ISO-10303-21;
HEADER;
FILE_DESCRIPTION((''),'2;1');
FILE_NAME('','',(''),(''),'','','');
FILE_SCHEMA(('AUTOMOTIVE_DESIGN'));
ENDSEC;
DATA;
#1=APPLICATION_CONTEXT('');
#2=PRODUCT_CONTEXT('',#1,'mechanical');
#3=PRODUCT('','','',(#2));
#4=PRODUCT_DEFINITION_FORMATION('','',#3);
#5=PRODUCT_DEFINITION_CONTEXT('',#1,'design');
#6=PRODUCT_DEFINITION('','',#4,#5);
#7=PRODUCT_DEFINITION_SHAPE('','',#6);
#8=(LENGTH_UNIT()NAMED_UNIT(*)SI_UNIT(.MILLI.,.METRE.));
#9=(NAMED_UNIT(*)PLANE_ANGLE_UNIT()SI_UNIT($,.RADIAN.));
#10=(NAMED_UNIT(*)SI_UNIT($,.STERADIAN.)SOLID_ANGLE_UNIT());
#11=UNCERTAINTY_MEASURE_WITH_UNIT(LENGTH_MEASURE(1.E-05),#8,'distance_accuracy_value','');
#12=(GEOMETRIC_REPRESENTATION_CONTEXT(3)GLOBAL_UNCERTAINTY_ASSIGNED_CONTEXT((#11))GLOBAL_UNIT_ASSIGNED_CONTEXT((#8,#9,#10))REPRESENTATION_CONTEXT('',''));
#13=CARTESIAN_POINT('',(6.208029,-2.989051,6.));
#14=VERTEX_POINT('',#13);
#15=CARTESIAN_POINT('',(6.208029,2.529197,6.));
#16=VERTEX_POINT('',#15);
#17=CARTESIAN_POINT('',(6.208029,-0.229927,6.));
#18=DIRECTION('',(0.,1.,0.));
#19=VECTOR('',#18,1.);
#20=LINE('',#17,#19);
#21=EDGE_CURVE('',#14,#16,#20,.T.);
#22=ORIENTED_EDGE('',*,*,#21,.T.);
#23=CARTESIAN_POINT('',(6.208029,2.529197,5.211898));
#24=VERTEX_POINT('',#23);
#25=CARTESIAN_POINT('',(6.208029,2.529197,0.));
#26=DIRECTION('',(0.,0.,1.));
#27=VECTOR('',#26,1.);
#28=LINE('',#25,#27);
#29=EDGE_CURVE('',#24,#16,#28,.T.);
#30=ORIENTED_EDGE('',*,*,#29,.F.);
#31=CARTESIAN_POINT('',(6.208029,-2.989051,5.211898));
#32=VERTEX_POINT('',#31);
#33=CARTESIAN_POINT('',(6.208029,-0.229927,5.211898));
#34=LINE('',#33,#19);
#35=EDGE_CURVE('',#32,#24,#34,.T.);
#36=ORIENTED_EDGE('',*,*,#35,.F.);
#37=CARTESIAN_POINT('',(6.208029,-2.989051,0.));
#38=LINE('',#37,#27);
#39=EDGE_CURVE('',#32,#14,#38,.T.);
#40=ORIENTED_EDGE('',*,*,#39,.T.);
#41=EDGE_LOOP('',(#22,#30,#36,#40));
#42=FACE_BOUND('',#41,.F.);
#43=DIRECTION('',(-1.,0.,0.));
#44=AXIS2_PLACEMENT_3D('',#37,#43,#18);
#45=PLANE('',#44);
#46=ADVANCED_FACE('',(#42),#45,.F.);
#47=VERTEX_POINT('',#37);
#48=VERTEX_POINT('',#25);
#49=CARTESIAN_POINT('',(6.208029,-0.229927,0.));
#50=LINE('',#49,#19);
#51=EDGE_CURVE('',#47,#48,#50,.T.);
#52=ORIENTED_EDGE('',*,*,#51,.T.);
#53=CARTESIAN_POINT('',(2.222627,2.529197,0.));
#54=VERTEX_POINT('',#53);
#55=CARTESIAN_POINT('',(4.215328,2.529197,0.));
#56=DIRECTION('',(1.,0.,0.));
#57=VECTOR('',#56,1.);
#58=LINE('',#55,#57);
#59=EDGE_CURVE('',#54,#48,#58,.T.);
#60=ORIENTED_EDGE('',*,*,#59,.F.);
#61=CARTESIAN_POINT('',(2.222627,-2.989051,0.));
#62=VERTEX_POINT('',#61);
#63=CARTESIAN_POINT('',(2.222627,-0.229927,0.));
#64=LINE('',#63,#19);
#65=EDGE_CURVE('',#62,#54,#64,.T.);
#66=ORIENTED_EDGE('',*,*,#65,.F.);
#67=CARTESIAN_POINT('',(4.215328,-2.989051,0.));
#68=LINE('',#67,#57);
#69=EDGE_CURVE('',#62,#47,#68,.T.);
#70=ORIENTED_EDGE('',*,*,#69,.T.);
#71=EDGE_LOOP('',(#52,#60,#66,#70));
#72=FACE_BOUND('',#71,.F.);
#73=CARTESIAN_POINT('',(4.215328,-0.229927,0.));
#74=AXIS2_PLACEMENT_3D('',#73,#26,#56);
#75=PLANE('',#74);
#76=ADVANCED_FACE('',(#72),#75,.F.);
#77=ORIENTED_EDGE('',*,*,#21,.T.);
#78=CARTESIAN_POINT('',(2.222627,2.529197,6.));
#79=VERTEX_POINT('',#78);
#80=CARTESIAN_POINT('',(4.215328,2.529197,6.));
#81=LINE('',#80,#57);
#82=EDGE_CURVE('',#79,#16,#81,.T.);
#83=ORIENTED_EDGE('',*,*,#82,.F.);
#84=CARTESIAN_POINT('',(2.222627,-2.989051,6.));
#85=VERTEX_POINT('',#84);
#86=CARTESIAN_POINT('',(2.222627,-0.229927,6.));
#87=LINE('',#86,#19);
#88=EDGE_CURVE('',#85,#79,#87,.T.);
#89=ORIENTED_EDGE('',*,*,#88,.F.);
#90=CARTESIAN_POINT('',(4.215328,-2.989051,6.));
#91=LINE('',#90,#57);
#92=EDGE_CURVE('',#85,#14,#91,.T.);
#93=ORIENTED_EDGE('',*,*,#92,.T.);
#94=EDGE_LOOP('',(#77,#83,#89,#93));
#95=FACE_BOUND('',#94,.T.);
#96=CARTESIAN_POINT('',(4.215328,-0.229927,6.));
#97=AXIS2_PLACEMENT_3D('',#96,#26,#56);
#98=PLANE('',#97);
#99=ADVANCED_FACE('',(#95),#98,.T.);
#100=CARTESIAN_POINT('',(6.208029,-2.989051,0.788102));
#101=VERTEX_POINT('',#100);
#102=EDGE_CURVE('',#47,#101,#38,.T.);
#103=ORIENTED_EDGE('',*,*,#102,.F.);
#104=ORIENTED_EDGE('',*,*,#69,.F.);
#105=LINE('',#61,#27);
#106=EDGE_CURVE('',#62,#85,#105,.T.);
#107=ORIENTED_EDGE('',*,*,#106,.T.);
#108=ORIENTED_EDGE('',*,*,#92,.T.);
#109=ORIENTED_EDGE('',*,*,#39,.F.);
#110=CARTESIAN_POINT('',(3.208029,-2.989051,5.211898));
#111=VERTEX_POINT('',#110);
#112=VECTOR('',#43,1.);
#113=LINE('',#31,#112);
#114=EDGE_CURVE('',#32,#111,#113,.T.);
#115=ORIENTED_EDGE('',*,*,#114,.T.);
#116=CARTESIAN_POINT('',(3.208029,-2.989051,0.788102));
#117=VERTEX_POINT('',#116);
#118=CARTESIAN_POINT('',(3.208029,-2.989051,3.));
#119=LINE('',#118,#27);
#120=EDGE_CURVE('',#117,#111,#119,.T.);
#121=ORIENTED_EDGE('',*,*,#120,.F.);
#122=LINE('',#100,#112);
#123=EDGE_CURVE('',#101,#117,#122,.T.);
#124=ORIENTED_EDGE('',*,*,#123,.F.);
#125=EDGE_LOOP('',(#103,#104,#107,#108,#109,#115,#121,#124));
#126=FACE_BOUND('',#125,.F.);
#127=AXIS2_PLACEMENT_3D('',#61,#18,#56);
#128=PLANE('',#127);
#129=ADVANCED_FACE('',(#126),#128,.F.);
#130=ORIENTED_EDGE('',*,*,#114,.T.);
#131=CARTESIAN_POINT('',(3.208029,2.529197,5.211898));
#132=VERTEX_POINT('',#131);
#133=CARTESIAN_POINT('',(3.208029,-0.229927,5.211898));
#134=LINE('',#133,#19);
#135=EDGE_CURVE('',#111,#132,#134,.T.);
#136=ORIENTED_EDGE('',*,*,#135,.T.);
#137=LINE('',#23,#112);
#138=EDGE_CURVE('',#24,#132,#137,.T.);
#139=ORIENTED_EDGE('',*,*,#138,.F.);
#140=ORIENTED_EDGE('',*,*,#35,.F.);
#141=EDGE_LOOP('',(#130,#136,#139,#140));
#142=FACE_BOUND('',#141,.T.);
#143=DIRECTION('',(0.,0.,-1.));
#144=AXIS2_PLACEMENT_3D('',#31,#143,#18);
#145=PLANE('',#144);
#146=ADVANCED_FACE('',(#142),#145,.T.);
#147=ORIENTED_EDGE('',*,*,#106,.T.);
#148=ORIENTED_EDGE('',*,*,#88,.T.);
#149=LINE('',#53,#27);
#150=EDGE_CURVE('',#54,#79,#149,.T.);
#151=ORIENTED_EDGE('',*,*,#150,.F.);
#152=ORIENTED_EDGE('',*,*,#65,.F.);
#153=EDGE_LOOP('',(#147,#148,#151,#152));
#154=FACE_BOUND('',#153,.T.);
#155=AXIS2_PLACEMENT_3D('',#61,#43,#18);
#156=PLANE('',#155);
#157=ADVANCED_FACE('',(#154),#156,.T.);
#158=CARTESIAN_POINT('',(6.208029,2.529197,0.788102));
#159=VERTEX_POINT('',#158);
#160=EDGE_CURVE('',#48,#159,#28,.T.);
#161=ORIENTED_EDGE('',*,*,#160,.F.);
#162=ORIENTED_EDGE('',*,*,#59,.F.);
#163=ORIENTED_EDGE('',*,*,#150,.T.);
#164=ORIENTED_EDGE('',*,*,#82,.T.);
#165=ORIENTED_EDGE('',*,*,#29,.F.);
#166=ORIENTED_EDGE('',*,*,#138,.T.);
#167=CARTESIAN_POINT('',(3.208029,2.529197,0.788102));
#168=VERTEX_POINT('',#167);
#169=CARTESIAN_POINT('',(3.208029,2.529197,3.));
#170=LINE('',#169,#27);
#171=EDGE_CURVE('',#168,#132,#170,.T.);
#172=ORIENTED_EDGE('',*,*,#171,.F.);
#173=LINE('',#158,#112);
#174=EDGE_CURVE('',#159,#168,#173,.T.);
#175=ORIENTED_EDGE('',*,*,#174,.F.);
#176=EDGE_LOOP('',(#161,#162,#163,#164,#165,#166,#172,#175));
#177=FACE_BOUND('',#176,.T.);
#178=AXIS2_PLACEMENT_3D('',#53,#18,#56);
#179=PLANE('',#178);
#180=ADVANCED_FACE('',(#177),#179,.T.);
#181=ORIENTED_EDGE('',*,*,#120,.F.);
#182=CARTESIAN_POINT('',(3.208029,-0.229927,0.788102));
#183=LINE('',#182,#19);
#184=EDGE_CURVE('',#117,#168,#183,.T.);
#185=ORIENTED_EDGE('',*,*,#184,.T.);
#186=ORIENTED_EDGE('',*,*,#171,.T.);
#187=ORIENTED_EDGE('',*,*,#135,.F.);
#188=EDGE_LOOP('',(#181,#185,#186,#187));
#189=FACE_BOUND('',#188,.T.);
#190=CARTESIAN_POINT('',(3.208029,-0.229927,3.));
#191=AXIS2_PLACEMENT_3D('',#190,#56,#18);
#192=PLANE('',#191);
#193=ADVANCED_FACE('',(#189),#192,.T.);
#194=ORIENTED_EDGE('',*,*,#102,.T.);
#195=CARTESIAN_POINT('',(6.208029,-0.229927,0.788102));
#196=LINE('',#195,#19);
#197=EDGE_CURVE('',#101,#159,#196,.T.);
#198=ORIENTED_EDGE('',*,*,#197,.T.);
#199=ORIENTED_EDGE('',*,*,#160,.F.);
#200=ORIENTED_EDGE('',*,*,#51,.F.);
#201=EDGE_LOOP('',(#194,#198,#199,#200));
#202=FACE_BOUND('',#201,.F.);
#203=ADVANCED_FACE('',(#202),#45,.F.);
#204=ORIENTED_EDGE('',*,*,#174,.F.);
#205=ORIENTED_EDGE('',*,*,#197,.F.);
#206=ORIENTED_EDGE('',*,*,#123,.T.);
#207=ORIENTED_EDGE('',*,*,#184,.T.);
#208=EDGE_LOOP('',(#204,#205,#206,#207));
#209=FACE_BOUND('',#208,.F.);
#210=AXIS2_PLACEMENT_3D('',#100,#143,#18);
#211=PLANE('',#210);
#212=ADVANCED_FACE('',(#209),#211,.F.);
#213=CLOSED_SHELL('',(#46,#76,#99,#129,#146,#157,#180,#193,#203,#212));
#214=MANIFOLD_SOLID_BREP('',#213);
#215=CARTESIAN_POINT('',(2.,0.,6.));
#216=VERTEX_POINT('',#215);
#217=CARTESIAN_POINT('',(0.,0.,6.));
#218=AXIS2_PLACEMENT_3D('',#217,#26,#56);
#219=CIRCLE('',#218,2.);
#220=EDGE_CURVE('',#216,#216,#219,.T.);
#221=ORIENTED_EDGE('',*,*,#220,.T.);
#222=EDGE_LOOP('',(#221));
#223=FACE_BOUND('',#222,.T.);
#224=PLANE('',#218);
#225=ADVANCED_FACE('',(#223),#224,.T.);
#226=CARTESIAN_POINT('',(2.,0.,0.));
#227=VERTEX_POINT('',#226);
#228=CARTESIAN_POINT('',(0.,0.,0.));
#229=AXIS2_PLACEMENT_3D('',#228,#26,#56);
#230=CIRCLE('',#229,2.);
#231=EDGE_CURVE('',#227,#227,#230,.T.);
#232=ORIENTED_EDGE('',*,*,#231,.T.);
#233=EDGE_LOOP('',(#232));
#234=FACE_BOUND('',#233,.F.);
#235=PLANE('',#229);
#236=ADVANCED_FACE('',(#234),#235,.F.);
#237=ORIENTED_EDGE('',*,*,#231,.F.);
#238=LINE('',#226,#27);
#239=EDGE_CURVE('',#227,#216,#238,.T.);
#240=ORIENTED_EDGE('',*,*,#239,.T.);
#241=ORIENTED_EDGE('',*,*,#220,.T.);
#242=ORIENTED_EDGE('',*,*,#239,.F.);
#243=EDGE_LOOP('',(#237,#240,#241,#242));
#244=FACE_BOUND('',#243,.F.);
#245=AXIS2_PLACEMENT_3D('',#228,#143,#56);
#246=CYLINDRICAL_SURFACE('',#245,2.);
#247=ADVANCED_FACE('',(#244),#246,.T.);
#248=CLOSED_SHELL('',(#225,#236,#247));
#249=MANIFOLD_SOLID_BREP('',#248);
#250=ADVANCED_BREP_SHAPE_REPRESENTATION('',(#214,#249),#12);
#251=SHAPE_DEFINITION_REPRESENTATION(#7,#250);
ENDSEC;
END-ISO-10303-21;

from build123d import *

# Parameters (mm, degrees)
F0_W     = 3.9854018639
F0_H     = 5.5182484599
F1_DEPTH = 6
F0_R     = 2
F4_W     = 5.5182484599
F4_H     = 4.4237960246
F5_DEPTH = 3


# Not quite as in the source:
# - a feature of the source that left no trace in its solid (it failed there, or was rolled back) is left out


with BuildPart() as f1:
    # F0 (on Top) → F1 (new body)
    with BuildSketch(Plane.XY):
        with Locations((4.2153283333, -0.2299270127)):
            Rectangle(F0_W, F0_H)
    extrude(amount=F1_DEPTH)

    # F4 (on face) → F5 (cut)
    with BuildSketch(Plane.YZ.offset(6.2080292652)):
        with Locations((-0.2299270127, 3.0000001134)):
            Rectangle(F4_W, F4_H)
    extrude(amount=-F5_DEPTH, mode=Mode.SUBTRACT)


with BuildPart() as f1b:
    # F0 (on Top) → F1, piece 2 (new body)
    with BuildSketch(Plane.XY):
        Circle(F0_R)
    extrude(amount=F1_DEPTH)


solid = Compound([f1.part, f1b.part])
